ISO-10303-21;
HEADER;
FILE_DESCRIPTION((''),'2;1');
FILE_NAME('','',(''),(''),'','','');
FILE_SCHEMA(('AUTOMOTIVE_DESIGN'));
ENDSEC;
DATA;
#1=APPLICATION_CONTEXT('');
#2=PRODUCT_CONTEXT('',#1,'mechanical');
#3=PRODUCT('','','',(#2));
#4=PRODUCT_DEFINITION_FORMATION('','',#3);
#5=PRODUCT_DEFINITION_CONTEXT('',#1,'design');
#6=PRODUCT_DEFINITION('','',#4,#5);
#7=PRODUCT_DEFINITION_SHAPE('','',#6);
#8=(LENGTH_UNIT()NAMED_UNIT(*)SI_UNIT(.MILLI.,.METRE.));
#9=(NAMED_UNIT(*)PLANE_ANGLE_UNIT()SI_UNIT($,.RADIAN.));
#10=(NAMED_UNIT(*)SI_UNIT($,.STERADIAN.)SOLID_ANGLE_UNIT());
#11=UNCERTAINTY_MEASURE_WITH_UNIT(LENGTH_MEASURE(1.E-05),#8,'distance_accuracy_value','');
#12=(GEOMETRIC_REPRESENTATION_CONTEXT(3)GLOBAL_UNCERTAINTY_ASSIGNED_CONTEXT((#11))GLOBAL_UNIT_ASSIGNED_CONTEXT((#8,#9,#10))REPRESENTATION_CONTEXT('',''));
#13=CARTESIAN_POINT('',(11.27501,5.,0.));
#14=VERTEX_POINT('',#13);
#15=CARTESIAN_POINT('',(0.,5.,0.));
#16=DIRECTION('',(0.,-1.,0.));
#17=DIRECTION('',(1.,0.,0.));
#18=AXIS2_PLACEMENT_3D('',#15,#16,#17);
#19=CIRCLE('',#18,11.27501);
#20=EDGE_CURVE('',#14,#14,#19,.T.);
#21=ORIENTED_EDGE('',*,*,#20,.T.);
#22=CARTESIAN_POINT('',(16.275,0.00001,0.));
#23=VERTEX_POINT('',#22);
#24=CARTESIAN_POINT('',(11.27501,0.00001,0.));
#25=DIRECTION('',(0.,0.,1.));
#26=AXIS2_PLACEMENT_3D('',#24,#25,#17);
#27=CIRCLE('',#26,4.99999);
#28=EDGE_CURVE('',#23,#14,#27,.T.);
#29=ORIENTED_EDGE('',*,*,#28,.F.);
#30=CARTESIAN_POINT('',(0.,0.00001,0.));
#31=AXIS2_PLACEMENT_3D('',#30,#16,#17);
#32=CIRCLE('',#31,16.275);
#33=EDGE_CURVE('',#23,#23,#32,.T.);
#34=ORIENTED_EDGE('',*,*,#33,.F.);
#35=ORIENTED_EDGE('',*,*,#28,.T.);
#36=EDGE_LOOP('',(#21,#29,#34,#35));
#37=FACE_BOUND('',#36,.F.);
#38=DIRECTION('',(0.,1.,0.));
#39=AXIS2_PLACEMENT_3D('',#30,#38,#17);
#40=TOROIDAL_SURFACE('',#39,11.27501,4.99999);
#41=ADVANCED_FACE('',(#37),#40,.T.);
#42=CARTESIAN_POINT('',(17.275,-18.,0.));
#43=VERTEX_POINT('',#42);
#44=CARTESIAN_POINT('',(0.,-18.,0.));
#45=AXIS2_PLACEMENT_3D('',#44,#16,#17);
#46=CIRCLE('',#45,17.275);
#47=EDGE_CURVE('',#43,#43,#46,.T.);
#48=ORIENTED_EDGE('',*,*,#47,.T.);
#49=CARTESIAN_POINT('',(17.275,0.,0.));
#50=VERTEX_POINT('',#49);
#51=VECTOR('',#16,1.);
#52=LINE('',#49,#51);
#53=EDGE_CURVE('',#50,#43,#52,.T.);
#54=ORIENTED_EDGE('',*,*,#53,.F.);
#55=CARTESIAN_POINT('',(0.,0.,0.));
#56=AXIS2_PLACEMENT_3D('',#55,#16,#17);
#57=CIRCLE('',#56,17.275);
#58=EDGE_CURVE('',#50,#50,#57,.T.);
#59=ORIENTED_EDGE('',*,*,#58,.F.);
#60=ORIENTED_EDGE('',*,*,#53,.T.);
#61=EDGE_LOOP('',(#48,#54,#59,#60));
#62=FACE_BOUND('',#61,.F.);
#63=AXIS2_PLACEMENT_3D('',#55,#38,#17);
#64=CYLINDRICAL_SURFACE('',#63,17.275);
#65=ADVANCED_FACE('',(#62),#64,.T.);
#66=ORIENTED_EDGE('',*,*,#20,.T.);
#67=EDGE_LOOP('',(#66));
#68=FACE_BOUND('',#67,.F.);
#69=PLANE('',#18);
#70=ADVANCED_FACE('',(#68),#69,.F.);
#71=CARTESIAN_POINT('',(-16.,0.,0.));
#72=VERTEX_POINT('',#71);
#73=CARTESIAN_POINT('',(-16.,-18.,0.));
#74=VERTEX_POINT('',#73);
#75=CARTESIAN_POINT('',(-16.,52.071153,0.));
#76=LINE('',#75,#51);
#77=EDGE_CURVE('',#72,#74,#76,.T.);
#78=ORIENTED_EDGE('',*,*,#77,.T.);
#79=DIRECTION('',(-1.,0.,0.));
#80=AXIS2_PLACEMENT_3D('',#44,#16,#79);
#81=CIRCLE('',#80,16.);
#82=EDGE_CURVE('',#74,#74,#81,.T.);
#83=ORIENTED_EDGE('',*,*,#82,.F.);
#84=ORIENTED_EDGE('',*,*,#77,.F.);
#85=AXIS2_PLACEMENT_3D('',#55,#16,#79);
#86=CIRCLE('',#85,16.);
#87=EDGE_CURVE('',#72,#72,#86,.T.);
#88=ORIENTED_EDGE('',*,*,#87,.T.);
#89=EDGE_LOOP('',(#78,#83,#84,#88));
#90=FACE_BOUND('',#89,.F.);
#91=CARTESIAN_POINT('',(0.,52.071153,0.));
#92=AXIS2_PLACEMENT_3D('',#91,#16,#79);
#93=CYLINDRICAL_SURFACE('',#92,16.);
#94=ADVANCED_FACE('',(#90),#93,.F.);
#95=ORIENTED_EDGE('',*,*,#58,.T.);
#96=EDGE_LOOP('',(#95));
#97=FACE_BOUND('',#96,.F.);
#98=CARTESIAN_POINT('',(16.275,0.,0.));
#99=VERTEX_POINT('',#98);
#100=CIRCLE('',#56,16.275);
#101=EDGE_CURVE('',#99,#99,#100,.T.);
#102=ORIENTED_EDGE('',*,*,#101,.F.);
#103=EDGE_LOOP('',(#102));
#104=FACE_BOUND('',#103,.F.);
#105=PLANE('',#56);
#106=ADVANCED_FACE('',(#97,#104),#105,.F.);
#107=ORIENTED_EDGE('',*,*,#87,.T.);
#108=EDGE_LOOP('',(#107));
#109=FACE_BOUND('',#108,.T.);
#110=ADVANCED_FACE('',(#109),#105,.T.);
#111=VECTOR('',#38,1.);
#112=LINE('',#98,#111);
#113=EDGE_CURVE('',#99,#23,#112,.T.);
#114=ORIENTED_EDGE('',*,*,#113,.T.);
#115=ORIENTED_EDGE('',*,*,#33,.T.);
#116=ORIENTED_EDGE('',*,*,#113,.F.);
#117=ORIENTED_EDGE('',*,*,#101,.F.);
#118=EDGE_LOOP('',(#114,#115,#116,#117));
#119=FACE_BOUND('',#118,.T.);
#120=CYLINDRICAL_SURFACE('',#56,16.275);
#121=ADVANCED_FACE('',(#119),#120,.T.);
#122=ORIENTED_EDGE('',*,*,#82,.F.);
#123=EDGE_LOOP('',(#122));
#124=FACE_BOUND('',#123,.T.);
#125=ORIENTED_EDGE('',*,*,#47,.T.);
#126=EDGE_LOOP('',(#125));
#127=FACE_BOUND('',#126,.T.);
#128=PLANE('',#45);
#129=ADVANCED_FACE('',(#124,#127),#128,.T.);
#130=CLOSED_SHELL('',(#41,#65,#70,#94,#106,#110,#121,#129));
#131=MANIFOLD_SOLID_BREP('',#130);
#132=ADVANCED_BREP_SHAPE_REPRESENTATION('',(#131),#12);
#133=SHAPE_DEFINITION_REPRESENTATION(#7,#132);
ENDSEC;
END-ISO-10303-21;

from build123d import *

# Parameters (mm, degrees)
F0_R     = 17.275
F1_DEPTH = 18
F3_D     = 32
F4_R     = 16.275
F5_DEPTH = 5
F6_R     = 4.99999


# Not quite as in the source:
# - a fillet or chamfer is up to 0.001 mm smaller than in the source, because OpenCascade refuses the exact size


with BuildPart() as f1:
    # F0 (on Front) → F1 (new body)
    with BuildSketch(Plane.XZ):
        Circle(F0_R)
    extrude(amount=F1_DEPTH)

    # F3 (through all)
    with Locations(Plane(origin=(0, 0, 0), x_dir=(1, 0, 0), z_dir=(0, 1, 0))):
        with Locations((0, 0)):
            Hole(F3_D / 2)

    # F4 (on Front) → F5 (join)
    with BuildSketch(Plane.XZ):
        Circle(F4_R)
    extrude(amount=-F5_DEPTH)

    # F6 (radius 5 in the source; OpenCascade refuses exactly that, so slightly less here)
    f6_edges = [f1.edges().sort_by_distance(p)[0] for p in [
        (-16.275, 5, 0),
    ]]
    fillet(f6_edges, radius=F6_R)


solid = f1.part
